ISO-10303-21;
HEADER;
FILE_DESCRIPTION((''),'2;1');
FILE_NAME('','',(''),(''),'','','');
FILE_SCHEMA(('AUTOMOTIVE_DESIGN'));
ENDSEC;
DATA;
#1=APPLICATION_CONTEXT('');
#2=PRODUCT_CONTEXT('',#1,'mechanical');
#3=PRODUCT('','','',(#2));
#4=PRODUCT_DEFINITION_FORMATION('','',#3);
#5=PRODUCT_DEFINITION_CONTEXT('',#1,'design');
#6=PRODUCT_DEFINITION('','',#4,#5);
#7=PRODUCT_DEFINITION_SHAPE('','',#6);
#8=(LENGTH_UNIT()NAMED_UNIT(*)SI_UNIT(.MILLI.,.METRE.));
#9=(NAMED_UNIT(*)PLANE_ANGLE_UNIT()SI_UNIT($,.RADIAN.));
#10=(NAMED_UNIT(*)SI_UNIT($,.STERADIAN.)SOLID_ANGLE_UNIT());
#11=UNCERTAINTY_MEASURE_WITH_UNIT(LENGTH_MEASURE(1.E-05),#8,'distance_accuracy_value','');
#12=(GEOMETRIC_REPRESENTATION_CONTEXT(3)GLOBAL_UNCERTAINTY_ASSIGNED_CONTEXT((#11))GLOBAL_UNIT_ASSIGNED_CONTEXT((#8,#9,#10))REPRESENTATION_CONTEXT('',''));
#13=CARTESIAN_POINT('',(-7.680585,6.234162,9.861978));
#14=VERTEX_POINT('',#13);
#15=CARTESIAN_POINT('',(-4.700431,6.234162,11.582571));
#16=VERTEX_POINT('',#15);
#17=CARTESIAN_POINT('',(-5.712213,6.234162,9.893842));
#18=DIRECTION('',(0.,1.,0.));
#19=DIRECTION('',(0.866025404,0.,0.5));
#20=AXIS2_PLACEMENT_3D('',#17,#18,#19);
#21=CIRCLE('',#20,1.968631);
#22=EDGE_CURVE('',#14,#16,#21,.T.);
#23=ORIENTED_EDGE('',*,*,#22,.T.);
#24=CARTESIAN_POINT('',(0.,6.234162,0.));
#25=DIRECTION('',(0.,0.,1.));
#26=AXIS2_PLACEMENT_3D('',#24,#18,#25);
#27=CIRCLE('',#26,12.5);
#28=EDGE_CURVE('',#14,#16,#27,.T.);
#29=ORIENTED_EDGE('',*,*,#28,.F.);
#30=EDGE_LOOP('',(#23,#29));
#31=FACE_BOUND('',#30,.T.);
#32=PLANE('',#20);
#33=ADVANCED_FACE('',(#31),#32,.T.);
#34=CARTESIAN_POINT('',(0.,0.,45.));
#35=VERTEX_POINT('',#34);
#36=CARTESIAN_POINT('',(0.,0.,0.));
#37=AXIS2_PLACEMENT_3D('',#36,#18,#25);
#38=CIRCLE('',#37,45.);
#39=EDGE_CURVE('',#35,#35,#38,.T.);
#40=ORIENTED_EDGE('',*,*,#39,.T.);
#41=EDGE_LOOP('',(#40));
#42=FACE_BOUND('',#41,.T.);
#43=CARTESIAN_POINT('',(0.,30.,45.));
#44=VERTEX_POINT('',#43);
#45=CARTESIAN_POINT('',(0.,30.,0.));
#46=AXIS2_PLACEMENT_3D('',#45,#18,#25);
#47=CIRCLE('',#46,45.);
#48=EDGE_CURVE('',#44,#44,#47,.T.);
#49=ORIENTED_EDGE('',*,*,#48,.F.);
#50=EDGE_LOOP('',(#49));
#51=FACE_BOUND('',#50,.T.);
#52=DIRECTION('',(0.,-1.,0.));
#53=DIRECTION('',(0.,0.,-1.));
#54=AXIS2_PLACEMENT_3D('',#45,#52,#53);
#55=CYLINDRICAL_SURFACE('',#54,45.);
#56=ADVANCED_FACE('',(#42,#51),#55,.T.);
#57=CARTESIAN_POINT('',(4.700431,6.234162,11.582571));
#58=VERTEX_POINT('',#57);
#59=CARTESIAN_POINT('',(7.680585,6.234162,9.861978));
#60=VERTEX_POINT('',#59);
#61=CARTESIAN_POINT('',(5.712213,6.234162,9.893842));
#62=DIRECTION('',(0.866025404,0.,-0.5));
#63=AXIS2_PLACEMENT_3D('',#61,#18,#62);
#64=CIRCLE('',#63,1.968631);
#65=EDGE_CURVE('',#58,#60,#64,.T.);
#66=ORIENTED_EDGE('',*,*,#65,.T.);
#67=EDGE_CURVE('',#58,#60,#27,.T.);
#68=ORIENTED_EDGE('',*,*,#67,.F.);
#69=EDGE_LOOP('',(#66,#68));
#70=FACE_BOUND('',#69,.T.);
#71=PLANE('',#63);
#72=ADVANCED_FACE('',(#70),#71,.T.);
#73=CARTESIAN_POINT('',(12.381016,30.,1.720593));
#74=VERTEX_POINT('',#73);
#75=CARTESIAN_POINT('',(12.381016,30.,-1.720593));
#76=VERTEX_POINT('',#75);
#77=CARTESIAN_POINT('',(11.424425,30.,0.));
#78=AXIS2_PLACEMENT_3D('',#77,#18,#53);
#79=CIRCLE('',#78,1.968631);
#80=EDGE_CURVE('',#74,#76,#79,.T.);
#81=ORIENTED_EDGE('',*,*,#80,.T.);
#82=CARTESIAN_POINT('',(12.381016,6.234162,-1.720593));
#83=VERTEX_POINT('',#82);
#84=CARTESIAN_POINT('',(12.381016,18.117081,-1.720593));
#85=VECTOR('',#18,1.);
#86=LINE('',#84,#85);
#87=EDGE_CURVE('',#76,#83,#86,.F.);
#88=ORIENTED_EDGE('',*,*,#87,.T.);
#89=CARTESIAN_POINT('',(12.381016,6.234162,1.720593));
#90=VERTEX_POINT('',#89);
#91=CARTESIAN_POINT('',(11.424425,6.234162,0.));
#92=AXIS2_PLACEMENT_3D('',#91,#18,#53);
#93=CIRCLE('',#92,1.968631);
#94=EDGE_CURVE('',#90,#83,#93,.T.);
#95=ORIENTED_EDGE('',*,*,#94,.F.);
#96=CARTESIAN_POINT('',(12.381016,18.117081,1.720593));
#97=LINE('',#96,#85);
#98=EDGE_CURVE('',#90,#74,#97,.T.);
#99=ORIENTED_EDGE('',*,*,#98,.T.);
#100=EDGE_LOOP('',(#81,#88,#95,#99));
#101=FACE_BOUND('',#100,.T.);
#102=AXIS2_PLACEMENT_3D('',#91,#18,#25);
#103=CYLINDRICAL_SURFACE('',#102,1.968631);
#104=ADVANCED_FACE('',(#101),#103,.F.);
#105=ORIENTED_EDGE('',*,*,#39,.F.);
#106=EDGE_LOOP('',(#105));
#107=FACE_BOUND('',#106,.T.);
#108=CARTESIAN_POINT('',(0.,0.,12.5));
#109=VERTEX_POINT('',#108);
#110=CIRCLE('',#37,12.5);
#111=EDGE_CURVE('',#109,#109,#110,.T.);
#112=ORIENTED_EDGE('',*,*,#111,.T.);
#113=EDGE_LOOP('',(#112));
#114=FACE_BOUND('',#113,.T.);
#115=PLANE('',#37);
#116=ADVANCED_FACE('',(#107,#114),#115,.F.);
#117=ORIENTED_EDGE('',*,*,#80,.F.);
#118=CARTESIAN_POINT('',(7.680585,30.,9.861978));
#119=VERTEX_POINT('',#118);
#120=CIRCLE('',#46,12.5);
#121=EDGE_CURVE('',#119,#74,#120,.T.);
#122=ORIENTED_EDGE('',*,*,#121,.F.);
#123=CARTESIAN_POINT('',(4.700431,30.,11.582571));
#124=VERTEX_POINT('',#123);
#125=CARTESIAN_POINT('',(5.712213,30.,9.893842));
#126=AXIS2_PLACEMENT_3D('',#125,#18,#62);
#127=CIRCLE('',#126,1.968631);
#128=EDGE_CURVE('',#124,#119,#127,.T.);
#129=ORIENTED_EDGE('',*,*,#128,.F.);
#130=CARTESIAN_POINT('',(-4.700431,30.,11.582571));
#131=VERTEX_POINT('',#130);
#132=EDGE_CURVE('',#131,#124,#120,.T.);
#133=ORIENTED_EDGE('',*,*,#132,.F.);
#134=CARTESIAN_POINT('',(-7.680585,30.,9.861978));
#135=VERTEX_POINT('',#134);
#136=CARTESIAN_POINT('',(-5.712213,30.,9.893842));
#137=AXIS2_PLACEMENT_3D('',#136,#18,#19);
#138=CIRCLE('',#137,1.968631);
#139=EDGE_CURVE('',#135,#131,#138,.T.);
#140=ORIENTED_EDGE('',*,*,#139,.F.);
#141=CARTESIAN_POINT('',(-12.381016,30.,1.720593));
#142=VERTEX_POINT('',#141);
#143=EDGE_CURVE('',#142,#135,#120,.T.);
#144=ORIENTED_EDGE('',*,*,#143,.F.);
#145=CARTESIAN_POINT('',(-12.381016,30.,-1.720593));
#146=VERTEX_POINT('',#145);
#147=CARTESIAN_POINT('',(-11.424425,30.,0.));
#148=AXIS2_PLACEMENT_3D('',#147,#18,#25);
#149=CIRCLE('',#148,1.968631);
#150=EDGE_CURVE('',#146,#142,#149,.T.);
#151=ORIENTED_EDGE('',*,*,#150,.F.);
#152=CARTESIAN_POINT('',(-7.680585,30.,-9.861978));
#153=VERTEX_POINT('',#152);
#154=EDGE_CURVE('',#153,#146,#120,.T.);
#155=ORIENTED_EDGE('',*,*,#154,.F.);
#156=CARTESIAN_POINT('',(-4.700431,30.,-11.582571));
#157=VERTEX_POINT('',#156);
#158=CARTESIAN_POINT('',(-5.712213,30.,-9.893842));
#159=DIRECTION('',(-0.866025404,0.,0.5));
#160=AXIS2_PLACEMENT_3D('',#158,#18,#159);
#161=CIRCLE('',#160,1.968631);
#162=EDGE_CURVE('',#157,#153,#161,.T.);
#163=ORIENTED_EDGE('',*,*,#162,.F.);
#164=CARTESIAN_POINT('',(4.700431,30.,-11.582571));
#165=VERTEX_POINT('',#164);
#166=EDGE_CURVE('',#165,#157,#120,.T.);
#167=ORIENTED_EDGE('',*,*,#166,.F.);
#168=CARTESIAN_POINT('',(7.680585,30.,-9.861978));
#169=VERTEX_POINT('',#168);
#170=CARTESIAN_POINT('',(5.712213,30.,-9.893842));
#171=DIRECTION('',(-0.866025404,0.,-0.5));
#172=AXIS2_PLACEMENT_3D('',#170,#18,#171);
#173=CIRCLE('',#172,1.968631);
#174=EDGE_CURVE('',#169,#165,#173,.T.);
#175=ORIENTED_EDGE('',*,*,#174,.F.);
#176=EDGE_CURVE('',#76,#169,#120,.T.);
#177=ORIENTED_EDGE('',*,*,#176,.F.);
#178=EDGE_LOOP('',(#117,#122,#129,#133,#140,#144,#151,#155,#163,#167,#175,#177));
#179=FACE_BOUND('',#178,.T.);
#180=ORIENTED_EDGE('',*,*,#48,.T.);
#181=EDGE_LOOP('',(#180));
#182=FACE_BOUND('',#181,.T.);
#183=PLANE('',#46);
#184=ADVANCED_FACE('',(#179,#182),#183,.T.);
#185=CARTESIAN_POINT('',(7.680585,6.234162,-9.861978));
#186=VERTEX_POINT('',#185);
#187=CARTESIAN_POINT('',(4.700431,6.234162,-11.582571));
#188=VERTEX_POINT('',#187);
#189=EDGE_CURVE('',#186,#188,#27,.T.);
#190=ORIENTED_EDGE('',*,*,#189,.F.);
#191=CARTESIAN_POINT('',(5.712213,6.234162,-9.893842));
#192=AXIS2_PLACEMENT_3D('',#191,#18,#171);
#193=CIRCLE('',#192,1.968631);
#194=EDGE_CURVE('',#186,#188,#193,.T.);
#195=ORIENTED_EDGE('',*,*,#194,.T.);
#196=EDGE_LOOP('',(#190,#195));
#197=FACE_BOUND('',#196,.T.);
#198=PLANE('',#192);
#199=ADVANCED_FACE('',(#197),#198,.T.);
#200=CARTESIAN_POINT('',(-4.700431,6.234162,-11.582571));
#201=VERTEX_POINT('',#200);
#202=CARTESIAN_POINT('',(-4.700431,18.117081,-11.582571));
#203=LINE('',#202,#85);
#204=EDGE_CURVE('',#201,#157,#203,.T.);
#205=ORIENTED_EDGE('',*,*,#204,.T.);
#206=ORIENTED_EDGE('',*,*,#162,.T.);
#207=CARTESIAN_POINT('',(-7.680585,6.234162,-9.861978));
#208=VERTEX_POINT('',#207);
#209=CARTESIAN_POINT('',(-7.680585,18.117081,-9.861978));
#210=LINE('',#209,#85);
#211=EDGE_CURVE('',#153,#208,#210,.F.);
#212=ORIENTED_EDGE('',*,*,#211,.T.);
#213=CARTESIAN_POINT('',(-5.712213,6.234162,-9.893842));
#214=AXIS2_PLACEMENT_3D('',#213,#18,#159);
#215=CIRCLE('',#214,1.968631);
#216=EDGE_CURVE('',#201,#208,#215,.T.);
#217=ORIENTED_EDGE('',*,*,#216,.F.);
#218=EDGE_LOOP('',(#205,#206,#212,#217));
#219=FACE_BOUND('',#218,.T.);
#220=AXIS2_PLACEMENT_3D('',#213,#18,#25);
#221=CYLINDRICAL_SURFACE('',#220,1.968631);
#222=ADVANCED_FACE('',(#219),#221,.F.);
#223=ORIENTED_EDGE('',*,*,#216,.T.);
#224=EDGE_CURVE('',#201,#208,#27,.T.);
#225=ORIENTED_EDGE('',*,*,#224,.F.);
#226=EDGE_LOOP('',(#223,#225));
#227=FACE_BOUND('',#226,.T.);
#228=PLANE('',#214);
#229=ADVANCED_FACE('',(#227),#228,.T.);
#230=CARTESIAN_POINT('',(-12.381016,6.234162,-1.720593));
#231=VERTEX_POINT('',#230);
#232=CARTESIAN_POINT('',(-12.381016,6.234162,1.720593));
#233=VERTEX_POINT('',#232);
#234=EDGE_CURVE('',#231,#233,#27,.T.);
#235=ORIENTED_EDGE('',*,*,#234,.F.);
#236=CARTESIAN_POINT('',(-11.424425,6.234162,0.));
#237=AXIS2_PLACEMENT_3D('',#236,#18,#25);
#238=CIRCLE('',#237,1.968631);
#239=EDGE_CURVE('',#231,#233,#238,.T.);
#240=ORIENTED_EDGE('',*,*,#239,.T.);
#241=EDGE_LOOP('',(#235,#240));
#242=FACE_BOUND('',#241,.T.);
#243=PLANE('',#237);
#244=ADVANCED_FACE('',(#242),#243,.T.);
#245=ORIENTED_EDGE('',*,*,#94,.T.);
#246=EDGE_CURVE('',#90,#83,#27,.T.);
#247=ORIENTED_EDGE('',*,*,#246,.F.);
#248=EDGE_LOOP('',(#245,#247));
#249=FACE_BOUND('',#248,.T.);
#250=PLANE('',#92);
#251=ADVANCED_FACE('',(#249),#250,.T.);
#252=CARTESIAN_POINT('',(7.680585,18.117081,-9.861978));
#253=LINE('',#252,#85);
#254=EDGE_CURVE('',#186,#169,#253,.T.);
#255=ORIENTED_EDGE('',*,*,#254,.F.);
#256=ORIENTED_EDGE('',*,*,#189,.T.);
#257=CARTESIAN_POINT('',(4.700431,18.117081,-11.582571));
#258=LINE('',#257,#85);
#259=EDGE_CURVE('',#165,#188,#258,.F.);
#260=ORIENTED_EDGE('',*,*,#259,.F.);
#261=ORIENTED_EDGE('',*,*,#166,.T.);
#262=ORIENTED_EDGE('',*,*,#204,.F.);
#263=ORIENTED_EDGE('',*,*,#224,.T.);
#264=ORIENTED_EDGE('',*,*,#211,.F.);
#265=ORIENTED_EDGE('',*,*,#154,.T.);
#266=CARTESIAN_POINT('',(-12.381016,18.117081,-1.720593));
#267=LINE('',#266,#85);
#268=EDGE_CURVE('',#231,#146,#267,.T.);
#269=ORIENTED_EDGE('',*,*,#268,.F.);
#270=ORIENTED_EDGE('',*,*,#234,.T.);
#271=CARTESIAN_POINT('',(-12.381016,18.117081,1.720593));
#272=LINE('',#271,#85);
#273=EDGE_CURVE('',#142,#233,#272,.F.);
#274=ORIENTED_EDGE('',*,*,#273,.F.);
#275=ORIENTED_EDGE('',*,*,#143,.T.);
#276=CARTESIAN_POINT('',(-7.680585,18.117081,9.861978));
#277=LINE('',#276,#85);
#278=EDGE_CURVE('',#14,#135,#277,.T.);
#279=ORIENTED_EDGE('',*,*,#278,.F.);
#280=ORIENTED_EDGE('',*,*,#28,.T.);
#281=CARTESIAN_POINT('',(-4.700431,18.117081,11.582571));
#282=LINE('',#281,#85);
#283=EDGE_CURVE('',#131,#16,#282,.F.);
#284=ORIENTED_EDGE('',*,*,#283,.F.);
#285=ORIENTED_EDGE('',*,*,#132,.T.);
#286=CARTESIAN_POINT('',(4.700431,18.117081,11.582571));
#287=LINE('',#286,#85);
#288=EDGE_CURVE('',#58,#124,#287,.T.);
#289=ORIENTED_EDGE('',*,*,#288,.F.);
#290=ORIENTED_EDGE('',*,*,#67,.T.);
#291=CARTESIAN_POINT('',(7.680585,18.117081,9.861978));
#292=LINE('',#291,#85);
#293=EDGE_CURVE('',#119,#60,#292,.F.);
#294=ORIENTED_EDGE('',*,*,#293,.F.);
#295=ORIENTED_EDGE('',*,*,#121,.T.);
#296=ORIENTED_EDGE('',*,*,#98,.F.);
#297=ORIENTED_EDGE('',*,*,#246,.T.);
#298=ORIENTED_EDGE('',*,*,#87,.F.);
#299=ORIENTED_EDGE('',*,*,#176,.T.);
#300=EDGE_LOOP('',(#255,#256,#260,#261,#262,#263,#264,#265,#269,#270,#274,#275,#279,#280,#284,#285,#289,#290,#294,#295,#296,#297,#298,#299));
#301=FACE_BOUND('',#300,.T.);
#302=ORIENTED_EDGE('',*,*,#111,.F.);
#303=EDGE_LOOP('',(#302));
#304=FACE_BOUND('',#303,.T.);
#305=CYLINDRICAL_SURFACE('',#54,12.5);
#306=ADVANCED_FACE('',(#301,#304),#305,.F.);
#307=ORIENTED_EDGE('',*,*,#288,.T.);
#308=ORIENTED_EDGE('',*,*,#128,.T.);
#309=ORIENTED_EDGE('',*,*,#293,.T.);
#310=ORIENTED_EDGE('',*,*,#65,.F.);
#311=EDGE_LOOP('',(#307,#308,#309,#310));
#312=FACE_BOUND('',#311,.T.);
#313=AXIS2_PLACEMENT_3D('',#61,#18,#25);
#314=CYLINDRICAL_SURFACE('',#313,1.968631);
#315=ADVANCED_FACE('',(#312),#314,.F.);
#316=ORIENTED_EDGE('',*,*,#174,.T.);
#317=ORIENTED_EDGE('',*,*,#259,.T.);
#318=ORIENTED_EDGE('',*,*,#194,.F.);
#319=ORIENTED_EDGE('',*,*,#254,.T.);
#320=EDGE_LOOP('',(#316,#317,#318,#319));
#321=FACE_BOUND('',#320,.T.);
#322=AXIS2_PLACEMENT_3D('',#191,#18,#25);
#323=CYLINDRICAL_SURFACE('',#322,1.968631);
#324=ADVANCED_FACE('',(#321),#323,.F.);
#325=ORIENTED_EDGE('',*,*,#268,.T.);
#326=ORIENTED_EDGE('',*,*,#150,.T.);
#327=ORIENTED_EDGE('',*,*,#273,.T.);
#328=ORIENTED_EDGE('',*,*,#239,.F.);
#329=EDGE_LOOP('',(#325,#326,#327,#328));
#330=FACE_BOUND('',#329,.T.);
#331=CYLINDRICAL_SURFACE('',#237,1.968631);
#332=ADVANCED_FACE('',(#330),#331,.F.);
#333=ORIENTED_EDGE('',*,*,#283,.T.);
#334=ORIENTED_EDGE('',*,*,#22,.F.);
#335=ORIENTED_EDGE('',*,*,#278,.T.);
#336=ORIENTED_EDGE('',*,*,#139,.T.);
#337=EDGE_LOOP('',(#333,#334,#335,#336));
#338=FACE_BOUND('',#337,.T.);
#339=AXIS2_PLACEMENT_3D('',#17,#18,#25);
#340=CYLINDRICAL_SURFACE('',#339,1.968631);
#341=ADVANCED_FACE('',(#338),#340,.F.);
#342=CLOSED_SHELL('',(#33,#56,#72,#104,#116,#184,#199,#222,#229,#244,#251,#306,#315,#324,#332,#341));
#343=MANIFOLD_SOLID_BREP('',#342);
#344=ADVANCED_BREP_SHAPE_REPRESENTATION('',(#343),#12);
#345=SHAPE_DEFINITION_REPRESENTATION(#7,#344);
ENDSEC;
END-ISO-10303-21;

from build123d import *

# Parameters (mm, degrees)
SKETCH1_R           = 45
BOSS_EXTRUDE1_DEPTH = 30
SKETCH2_R           = 12.5
CUT_EXTRUDE1_DEPTH  = 71.356236397
SKETCH3_R           = 1.96863067
CUT_EXTRUDE2_DEPTH  = 23.765838206
CIRPATTERN1_COUNT   = 6


with BuildPart() as part:
    # Sketch1 → Boss-Extrude1 (new body)
    with BuildSketch(Plane(origin=(0, 0, 0), x_dir=(1, 0, 0), z_dir=(0, 1, 0))):
        Circle(SKETCH1_R)
    extrude(amount=BOSS_EXTRUDE1_DEPTH)

    # Sketch2 → Cut-Extrude1 (cut, through all)
    with BuildSketch(Plane(origin=(0, 0, 0), x_dir=(1, 0, 0), z_dir=(0, 1, 0))):
        Circle(SKETCH2_R)
    extrude(amount=CUT_EXTRUDE1_DEPTH, mode=Mode.SUBTRACT)

    # Sketch3 → Cut-Extrude2 (cut)
    with BuildSketch(Plane(origin=(0, 30, 0), x_dir=(1, 0, 0), z_dir=(0, 1, 0))):
        with Locations((-11.424425229, 0)):
            Circle(SKETCH3_R)
    cut_extrude2 = extrude(amount=-CUT_EXTRUDE2_DEPTH, mode=Mode.SUBTRACT)

    # CirPattern1: Cut-Extrude2 ×6 about axis
    cirpattern1_axis = Axis((0, 0, 0), (0, 1, 0))
    for i in range(1, CIRPATTERN1_COUNT):
        add(cut_extrude2.rotate(cirpattern1_axis, i * 360 / CIRPATTERN1_COUNT), mode=Mode.SUBTRACT)


solid = part.part
